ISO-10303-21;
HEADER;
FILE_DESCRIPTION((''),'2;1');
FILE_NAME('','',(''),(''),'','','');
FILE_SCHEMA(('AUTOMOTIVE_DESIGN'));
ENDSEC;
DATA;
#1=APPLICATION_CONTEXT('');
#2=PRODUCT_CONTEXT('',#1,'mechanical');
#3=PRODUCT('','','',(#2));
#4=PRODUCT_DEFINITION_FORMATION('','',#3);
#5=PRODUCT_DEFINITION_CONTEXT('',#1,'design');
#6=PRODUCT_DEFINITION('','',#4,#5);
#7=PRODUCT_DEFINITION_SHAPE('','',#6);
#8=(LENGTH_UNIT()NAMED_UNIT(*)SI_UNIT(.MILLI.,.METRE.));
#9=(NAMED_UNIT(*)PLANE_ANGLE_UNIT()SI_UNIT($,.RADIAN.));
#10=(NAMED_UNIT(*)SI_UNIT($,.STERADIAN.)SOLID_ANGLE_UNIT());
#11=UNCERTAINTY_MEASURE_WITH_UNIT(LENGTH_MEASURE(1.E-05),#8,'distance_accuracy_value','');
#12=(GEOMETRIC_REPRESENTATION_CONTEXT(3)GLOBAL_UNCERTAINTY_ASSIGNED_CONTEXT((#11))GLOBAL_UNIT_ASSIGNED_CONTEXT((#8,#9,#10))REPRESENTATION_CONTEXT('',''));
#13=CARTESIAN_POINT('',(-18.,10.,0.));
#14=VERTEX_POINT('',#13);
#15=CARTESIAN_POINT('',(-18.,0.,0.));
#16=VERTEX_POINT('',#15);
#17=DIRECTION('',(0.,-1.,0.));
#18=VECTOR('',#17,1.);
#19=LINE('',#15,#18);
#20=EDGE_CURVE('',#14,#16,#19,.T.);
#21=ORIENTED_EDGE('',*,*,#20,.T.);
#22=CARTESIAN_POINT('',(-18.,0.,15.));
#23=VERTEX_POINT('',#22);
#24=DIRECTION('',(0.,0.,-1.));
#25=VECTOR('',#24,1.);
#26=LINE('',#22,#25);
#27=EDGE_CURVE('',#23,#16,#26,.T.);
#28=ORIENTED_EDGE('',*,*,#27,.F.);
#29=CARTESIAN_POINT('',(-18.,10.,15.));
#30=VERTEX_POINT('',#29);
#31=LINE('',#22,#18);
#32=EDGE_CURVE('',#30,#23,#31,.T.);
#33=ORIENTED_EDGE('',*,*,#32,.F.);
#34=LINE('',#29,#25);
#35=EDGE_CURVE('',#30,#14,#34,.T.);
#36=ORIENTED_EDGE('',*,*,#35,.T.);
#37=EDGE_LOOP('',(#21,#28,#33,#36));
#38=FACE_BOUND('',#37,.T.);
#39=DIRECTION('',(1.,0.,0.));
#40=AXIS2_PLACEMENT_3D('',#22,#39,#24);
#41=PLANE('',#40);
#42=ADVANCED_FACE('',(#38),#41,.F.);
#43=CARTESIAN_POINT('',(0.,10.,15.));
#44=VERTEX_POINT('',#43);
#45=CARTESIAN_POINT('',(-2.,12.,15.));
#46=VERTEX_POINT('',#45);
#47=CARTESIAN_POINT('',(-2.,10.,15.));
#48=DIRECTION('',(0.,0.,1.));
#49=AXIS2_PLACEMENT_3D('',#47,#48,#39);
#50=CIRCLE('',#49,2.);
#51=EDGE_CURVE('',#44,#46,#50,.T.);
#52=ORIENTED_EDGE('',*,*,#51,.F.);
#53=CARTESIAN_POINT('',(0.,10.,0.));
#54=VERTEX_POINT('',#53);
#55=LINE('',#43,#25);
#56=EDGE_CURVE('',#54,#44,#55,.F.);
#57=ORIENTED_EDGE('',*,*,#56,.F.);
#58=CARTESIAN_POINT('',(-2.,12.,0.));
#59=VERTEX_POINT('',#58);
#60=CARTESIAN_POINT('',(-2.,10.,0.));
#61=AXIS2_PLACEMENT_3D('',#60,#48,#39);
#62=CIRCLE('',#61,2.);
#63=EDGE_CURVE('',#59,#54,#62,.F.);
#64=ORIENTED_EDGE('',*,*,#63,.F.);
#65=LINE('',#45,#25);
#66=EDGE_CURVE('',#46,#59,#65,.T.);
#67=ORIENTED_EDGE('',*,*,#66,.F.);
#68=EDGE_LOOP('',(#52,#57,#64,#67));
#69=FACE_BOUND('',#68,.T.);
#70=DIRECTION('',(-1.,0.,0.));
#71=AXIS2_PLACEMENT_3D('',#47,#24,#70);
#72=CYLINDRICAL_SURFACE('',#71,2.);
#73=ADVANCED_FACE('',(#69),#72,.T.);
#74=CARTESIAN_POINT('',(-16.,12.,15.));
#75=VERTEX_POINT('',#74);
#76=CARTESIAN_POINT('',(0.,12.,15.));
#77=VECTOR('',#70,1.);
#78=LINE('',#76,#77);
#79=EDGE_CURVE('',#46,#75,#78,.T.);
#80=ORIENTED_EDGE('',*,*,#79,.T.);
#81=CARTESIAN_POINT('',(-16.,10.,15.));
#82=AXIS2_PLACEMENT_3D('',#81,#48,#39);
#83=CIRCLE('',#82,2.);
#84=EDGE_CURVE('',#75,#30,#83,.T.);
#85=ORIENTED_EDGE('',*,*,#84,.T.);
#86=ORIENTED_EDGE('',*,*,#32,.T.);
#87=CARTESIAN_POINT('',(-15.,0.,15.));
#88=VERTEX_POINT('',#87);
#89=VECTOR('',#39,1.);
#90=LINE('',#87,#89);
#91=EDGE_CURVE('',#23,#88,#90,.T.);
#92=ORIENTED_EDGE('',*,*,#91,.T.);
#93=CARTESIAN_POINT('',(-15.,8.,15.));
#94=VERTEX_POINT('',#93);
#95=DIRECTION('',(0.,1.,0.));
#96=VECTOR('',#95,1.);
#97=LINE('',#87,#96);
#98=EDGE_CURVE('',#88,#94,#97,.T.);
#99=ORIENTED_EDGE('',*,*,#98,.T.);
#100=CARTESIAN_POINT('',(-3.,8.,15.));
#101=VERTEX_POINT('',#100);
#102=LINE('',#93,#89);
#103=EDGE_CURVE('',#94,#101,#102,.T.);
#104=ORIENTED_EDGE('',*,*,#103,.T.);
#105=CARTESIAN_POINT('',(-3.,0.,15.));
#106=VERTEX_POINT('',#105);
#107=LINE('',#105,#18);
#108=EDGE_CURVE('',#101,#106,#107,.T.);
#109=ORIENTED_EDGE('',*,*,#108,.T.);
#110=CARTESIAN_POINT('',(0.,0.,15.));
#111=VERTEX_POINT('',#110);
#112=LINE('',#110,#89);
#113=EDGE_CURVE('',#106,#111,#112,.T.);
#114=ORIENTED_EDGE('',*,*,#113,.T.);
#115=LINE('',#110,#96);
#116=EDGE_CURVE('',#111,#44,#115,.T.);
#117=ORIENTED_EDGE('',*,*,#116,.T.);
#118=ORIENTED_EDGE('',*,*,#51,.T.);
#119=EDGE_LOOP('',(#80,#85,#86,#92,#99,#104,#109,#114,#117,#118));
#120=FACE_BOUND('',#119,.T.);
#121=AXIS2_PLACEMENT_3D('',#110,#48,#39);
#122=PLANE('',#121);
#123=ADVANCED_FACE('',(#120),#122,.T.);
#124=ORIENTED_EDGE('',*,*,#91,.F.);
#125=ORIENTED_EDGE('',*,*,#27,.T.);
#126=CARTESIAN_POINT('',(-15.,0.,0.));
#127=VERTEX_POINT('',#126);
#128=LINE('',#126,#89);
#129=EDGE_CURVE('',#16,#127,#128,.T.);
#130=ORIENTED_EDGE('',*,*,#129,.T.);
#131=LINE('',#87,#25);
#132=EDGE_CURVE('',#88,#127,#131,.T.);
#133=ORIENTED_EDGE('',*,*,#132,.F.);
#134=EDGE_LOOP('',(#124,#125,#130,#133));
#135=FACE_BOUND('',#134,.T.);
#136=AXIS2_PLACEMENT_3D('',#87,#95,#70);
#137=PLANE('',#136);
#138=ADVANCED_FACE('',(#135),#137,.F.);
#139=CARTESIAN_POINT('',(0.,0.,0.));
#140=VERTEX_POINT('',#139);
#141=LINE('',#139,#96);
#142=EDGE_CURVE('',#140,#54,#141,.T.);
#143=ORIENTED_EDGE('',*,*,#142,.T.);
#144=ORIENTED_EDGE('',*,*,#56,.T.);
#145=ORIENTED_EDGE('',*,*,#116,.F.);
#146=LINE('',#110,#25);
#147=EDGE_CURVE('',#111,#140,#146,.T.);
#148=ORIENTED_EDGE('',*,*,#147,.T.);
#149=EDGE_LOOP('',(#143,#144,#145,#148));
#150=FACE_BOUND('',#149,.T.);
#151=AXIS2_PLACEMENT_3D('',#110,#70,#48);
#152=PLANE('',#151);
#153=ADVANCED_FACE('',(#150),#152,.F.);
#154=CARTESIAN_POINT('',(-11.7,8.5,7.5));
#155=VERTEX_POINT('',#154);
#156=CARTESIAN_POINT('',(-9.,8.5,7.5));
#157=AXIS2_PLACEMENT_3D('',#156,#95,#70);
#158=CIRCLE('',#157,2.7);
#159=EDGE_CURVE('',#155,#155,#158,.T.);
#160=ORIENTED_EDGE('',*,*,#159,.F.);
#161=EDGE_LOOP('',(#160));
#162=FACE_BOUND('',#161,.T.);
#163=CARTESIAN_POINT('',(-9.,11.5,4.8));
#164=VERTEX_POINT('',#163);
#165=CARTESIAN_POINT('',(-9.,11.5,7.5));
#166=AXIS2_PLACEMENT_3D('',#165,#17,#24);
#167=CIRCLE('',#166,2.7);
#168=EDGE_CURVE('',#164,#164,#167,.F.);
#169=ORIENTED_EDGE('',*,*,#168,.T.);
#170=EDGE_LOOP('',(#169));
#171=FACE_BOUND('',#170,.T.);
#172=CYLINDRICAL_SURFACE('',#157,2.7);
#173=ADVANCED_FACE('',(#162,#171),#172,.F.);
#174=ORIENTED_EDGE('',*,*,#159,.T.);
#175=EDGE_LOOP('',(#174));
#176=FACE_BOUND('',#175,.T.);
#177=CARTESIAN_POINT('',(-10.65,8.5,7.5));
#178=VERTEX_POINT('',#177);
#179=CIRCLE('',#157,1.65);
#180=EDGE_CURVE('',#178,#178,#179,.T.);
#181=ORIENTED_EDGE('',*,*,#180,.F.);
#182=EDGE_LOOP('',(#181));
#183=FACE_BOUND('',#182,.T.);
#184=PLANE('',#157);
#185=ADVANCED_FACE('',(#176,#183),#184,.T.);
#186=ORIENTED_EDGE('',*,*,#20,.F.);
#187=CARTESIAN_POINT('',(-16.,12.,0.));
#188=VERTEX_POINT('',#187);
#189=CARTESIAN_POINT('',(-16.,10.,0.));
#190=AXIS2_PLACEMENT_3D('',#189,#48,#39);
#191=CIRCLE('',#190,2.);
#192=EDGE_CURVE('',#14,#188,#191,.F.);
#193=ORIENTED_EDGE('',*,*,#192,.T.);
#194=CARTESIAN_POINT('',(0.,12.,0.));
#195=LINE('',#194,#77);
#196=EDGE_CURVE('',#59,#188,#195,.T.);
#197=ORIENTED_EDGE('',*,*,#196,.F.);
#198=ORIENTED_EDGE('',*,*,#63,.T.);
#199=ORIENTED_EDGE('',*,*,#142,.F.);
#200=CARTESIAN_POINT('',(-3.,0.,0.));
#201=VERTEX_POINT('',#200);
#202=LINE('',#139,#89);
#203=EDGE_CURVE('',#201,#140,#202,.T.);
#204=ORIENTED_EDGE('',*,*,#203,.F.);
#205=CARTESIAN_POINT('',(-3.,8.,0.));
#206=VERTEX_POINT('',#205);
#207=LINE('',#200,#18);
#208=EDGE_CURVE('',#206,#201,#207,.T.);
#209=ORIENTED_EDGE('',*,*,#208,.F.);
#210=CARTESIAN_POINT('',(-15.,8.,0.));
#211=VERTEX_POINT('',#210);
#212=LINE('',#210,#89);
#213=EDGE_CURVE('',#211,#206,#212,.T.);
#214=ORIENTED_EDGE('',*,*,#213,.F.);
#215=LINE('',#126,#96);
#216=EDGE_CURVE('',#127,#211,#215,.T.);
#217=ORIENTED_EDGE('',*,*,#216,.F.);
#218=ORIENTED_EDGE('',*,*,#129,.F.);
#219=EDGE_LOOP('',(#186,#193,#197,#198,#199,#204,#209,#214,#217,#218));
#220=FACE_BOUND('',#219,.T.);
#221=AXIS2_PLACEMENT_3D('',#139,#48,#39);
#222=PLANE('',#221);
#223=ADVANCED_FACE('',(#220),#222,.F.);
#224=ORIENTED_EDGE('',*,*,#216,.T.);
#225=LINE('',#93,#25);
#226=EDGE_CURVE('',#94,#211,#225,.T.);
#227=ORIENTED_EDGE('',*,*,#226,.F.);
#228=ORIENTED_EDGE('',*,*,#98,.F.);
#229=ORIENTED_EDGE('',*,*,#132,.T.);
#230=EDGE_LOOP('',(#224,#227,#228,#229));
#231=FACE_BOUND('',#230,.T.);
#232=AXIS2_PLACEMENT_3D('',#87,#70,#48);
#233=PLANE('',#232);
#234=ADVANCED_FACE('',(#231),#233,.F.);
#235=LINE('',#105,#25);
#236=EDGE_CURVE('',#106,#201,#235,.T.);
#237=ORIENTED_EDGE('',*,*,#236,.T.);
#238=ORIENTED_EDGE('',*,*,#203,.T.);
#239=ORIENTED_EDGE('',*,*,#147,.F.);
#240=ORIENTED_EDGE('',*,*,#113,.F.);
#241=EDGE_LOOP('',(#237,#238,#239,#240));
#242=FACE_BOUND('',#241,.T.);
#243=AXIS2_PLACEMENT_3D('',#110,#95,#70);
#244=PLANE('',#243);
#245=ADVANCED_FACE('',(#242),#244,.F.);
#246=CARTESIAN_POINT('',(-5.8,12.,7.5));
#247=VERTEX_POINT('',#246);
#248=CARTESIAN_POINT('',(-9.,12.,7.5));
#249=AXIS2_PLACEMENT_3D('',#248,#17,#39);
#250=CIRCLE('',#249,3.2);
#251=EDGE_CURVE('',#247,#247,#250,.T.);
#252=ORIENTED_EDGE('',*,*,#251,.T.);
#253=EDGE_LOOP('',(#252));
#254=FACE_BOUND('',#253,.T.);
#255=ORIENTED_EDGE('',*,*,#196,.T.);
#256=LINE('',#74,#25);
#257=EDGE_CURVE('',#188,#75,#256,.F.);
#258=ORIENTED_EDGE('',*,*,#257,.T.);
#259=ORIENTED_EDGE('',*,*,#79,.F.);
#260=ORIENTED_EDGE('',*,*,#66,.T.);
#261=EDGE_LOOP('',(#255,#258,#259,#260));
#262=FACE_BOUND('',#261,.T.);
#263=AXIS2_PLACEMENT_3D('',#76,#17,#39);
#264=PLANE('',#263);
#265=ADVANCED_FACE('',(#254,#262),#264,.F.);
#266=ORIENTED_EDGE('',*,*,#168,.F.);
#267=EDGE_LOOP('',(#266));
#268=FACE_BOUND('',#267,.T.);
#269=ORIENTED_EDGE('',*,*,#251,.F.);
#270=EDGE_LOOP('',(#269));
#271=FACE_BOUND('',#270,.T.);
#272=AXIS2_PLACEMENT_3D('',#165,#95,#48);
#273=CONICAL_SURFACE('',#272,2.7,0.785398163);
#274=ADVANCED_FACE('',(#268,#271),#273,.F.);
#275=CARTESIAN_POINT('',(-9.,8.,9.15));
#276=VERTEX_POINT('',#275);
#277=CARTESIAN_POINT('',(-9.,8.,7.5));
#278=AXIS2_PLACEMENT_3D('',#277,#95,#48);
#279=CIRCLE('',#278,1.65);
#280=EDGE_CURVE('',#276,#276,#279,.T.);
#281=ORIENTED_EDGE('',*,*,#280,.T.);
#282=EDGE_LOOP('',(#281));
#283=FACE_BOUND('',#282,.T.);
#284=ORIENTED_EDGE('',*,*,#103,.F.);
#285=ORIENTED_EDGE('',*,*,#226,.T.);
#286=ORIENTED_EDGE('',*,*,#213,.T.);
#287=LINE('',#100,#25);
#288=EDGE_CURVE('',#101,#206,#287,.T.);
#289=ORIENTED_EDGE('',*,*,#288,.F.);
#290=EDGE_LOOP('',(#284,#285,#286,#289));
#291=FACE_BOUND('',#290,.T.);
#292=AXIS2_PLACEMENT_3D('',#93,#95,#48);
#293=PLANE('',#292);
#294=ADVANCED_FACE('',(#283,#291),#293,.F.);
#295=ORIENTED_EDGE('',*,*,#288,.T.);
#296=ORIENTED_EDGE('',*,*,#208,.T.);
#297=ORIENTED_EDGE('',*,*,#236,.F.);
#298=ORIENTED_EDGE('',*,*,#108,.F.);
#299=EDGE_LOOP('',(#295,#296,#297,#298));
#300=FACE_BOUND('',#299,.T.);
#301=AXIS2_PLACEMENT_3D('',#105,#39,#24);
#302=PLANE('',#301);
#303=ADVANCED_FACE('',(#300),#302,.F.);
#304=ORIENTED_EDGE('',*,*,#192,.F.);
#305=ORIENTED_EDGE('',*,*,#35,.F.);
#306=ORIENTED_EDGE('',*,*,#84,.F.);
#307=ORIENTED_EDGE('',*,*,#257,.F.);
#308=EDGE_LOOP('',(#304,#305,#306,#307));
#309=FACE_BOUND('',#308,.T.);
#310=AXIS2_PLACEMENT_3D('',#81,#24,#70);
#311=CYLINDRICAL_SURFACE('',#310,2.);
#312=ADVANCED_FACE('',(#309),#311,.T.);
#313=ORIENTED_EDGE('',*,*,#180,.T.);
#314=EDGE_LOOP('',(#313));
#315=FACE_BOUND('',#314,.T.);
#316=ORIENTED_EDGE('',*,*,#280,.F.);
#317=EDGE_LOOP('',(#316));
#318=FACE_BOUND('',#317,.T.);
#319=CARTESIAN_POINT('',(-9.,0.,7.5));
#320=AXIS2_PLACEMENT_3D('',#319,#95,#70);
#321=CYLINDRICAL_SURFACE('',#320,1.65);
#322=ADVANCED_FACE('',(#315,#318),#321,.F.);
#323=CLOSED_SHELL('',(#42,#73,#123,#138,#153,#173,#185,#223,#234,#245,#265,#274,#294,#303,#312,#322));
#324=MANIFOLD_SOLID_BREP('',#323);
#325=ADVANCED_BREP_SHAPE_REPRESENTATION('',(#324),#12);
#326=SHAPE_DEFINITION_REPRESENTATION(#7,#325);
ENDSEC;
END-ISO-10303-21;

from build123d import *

# Parameters (mm, degrees)
EXTRUDE_1_DEPTH     = 15
SKETCH_2_R          = 2.7
CUT_EXTRUDE_1_DEPTH = 3.5
SKETCH_3_R          = 1.65
CUT_EXTRUDE_2_DEPTH = 25.924887161
FILLET_1_R          = 2
CHAMFER_1_SIZE      = 0.5


# Read off the part's stored shape, not the designer's step: 填料-伸長1
with BuildPart() as part:
    # 填料-伸長1 outline → 填料-伸長1 (new body)
    with BuildSketch(Plane.XY):
        Polygon((0, 0), (0, 12), (-18, 12), (-18, 0), (-15, 0), (-15, 8), (-3, 8), (-3, 0), align=None)
    extrude(amount=EXTRUDE_1_DEPTH)

    # 草圖2 → 除料-伸長1 (cut)
    with BuildSketch(Plane(origin=(0, 12, 0), x_dir=(1, 0, 0), z_dir=(0, 1, 0))):
        with Locations(Location((-9, -7.5, 0), (0, 0, 180))):
            Circle(SKETCH_2_R)
    extrude(amount=-CUT_EXTRUDE_1_DEPTH, mode=Mode.SUBTRACT)

    # 草圖3 → 除料-伸長2 (cut, through all)
    with BuildSketch(Plane(origin=(0, 8.5, 0), x_dir=(1, 0, 0), z_dir=(0, 1, 0))):
        with Locations(Location((-9, -7.5, 0), (0, 0, 180))):
            Circle(SKETCH_3_R)
    extrude(amount=-CUT_EXTRUDE_2_DEPTH, mode=Mode.SUBTRACT)

    # 圓角1
    fillet_1_edges = [part.edges().sort_by_distance(p)[0] for p in [
        (-18, 12, 7.5),
        (0, 12, 7.5),
    ]]
    fillet(fillet_1_edges, radius=FILLET_1_R)

    # 導角1
    chamfer_1_edges = [part.edges().sort_by_distance(p)[0] for p in [
        (-6.3, 12, 7.5),
    ]]
    chamfer(chamfer_1_edges, length=CHAMFER_1_SIZE)


solid = part.part
